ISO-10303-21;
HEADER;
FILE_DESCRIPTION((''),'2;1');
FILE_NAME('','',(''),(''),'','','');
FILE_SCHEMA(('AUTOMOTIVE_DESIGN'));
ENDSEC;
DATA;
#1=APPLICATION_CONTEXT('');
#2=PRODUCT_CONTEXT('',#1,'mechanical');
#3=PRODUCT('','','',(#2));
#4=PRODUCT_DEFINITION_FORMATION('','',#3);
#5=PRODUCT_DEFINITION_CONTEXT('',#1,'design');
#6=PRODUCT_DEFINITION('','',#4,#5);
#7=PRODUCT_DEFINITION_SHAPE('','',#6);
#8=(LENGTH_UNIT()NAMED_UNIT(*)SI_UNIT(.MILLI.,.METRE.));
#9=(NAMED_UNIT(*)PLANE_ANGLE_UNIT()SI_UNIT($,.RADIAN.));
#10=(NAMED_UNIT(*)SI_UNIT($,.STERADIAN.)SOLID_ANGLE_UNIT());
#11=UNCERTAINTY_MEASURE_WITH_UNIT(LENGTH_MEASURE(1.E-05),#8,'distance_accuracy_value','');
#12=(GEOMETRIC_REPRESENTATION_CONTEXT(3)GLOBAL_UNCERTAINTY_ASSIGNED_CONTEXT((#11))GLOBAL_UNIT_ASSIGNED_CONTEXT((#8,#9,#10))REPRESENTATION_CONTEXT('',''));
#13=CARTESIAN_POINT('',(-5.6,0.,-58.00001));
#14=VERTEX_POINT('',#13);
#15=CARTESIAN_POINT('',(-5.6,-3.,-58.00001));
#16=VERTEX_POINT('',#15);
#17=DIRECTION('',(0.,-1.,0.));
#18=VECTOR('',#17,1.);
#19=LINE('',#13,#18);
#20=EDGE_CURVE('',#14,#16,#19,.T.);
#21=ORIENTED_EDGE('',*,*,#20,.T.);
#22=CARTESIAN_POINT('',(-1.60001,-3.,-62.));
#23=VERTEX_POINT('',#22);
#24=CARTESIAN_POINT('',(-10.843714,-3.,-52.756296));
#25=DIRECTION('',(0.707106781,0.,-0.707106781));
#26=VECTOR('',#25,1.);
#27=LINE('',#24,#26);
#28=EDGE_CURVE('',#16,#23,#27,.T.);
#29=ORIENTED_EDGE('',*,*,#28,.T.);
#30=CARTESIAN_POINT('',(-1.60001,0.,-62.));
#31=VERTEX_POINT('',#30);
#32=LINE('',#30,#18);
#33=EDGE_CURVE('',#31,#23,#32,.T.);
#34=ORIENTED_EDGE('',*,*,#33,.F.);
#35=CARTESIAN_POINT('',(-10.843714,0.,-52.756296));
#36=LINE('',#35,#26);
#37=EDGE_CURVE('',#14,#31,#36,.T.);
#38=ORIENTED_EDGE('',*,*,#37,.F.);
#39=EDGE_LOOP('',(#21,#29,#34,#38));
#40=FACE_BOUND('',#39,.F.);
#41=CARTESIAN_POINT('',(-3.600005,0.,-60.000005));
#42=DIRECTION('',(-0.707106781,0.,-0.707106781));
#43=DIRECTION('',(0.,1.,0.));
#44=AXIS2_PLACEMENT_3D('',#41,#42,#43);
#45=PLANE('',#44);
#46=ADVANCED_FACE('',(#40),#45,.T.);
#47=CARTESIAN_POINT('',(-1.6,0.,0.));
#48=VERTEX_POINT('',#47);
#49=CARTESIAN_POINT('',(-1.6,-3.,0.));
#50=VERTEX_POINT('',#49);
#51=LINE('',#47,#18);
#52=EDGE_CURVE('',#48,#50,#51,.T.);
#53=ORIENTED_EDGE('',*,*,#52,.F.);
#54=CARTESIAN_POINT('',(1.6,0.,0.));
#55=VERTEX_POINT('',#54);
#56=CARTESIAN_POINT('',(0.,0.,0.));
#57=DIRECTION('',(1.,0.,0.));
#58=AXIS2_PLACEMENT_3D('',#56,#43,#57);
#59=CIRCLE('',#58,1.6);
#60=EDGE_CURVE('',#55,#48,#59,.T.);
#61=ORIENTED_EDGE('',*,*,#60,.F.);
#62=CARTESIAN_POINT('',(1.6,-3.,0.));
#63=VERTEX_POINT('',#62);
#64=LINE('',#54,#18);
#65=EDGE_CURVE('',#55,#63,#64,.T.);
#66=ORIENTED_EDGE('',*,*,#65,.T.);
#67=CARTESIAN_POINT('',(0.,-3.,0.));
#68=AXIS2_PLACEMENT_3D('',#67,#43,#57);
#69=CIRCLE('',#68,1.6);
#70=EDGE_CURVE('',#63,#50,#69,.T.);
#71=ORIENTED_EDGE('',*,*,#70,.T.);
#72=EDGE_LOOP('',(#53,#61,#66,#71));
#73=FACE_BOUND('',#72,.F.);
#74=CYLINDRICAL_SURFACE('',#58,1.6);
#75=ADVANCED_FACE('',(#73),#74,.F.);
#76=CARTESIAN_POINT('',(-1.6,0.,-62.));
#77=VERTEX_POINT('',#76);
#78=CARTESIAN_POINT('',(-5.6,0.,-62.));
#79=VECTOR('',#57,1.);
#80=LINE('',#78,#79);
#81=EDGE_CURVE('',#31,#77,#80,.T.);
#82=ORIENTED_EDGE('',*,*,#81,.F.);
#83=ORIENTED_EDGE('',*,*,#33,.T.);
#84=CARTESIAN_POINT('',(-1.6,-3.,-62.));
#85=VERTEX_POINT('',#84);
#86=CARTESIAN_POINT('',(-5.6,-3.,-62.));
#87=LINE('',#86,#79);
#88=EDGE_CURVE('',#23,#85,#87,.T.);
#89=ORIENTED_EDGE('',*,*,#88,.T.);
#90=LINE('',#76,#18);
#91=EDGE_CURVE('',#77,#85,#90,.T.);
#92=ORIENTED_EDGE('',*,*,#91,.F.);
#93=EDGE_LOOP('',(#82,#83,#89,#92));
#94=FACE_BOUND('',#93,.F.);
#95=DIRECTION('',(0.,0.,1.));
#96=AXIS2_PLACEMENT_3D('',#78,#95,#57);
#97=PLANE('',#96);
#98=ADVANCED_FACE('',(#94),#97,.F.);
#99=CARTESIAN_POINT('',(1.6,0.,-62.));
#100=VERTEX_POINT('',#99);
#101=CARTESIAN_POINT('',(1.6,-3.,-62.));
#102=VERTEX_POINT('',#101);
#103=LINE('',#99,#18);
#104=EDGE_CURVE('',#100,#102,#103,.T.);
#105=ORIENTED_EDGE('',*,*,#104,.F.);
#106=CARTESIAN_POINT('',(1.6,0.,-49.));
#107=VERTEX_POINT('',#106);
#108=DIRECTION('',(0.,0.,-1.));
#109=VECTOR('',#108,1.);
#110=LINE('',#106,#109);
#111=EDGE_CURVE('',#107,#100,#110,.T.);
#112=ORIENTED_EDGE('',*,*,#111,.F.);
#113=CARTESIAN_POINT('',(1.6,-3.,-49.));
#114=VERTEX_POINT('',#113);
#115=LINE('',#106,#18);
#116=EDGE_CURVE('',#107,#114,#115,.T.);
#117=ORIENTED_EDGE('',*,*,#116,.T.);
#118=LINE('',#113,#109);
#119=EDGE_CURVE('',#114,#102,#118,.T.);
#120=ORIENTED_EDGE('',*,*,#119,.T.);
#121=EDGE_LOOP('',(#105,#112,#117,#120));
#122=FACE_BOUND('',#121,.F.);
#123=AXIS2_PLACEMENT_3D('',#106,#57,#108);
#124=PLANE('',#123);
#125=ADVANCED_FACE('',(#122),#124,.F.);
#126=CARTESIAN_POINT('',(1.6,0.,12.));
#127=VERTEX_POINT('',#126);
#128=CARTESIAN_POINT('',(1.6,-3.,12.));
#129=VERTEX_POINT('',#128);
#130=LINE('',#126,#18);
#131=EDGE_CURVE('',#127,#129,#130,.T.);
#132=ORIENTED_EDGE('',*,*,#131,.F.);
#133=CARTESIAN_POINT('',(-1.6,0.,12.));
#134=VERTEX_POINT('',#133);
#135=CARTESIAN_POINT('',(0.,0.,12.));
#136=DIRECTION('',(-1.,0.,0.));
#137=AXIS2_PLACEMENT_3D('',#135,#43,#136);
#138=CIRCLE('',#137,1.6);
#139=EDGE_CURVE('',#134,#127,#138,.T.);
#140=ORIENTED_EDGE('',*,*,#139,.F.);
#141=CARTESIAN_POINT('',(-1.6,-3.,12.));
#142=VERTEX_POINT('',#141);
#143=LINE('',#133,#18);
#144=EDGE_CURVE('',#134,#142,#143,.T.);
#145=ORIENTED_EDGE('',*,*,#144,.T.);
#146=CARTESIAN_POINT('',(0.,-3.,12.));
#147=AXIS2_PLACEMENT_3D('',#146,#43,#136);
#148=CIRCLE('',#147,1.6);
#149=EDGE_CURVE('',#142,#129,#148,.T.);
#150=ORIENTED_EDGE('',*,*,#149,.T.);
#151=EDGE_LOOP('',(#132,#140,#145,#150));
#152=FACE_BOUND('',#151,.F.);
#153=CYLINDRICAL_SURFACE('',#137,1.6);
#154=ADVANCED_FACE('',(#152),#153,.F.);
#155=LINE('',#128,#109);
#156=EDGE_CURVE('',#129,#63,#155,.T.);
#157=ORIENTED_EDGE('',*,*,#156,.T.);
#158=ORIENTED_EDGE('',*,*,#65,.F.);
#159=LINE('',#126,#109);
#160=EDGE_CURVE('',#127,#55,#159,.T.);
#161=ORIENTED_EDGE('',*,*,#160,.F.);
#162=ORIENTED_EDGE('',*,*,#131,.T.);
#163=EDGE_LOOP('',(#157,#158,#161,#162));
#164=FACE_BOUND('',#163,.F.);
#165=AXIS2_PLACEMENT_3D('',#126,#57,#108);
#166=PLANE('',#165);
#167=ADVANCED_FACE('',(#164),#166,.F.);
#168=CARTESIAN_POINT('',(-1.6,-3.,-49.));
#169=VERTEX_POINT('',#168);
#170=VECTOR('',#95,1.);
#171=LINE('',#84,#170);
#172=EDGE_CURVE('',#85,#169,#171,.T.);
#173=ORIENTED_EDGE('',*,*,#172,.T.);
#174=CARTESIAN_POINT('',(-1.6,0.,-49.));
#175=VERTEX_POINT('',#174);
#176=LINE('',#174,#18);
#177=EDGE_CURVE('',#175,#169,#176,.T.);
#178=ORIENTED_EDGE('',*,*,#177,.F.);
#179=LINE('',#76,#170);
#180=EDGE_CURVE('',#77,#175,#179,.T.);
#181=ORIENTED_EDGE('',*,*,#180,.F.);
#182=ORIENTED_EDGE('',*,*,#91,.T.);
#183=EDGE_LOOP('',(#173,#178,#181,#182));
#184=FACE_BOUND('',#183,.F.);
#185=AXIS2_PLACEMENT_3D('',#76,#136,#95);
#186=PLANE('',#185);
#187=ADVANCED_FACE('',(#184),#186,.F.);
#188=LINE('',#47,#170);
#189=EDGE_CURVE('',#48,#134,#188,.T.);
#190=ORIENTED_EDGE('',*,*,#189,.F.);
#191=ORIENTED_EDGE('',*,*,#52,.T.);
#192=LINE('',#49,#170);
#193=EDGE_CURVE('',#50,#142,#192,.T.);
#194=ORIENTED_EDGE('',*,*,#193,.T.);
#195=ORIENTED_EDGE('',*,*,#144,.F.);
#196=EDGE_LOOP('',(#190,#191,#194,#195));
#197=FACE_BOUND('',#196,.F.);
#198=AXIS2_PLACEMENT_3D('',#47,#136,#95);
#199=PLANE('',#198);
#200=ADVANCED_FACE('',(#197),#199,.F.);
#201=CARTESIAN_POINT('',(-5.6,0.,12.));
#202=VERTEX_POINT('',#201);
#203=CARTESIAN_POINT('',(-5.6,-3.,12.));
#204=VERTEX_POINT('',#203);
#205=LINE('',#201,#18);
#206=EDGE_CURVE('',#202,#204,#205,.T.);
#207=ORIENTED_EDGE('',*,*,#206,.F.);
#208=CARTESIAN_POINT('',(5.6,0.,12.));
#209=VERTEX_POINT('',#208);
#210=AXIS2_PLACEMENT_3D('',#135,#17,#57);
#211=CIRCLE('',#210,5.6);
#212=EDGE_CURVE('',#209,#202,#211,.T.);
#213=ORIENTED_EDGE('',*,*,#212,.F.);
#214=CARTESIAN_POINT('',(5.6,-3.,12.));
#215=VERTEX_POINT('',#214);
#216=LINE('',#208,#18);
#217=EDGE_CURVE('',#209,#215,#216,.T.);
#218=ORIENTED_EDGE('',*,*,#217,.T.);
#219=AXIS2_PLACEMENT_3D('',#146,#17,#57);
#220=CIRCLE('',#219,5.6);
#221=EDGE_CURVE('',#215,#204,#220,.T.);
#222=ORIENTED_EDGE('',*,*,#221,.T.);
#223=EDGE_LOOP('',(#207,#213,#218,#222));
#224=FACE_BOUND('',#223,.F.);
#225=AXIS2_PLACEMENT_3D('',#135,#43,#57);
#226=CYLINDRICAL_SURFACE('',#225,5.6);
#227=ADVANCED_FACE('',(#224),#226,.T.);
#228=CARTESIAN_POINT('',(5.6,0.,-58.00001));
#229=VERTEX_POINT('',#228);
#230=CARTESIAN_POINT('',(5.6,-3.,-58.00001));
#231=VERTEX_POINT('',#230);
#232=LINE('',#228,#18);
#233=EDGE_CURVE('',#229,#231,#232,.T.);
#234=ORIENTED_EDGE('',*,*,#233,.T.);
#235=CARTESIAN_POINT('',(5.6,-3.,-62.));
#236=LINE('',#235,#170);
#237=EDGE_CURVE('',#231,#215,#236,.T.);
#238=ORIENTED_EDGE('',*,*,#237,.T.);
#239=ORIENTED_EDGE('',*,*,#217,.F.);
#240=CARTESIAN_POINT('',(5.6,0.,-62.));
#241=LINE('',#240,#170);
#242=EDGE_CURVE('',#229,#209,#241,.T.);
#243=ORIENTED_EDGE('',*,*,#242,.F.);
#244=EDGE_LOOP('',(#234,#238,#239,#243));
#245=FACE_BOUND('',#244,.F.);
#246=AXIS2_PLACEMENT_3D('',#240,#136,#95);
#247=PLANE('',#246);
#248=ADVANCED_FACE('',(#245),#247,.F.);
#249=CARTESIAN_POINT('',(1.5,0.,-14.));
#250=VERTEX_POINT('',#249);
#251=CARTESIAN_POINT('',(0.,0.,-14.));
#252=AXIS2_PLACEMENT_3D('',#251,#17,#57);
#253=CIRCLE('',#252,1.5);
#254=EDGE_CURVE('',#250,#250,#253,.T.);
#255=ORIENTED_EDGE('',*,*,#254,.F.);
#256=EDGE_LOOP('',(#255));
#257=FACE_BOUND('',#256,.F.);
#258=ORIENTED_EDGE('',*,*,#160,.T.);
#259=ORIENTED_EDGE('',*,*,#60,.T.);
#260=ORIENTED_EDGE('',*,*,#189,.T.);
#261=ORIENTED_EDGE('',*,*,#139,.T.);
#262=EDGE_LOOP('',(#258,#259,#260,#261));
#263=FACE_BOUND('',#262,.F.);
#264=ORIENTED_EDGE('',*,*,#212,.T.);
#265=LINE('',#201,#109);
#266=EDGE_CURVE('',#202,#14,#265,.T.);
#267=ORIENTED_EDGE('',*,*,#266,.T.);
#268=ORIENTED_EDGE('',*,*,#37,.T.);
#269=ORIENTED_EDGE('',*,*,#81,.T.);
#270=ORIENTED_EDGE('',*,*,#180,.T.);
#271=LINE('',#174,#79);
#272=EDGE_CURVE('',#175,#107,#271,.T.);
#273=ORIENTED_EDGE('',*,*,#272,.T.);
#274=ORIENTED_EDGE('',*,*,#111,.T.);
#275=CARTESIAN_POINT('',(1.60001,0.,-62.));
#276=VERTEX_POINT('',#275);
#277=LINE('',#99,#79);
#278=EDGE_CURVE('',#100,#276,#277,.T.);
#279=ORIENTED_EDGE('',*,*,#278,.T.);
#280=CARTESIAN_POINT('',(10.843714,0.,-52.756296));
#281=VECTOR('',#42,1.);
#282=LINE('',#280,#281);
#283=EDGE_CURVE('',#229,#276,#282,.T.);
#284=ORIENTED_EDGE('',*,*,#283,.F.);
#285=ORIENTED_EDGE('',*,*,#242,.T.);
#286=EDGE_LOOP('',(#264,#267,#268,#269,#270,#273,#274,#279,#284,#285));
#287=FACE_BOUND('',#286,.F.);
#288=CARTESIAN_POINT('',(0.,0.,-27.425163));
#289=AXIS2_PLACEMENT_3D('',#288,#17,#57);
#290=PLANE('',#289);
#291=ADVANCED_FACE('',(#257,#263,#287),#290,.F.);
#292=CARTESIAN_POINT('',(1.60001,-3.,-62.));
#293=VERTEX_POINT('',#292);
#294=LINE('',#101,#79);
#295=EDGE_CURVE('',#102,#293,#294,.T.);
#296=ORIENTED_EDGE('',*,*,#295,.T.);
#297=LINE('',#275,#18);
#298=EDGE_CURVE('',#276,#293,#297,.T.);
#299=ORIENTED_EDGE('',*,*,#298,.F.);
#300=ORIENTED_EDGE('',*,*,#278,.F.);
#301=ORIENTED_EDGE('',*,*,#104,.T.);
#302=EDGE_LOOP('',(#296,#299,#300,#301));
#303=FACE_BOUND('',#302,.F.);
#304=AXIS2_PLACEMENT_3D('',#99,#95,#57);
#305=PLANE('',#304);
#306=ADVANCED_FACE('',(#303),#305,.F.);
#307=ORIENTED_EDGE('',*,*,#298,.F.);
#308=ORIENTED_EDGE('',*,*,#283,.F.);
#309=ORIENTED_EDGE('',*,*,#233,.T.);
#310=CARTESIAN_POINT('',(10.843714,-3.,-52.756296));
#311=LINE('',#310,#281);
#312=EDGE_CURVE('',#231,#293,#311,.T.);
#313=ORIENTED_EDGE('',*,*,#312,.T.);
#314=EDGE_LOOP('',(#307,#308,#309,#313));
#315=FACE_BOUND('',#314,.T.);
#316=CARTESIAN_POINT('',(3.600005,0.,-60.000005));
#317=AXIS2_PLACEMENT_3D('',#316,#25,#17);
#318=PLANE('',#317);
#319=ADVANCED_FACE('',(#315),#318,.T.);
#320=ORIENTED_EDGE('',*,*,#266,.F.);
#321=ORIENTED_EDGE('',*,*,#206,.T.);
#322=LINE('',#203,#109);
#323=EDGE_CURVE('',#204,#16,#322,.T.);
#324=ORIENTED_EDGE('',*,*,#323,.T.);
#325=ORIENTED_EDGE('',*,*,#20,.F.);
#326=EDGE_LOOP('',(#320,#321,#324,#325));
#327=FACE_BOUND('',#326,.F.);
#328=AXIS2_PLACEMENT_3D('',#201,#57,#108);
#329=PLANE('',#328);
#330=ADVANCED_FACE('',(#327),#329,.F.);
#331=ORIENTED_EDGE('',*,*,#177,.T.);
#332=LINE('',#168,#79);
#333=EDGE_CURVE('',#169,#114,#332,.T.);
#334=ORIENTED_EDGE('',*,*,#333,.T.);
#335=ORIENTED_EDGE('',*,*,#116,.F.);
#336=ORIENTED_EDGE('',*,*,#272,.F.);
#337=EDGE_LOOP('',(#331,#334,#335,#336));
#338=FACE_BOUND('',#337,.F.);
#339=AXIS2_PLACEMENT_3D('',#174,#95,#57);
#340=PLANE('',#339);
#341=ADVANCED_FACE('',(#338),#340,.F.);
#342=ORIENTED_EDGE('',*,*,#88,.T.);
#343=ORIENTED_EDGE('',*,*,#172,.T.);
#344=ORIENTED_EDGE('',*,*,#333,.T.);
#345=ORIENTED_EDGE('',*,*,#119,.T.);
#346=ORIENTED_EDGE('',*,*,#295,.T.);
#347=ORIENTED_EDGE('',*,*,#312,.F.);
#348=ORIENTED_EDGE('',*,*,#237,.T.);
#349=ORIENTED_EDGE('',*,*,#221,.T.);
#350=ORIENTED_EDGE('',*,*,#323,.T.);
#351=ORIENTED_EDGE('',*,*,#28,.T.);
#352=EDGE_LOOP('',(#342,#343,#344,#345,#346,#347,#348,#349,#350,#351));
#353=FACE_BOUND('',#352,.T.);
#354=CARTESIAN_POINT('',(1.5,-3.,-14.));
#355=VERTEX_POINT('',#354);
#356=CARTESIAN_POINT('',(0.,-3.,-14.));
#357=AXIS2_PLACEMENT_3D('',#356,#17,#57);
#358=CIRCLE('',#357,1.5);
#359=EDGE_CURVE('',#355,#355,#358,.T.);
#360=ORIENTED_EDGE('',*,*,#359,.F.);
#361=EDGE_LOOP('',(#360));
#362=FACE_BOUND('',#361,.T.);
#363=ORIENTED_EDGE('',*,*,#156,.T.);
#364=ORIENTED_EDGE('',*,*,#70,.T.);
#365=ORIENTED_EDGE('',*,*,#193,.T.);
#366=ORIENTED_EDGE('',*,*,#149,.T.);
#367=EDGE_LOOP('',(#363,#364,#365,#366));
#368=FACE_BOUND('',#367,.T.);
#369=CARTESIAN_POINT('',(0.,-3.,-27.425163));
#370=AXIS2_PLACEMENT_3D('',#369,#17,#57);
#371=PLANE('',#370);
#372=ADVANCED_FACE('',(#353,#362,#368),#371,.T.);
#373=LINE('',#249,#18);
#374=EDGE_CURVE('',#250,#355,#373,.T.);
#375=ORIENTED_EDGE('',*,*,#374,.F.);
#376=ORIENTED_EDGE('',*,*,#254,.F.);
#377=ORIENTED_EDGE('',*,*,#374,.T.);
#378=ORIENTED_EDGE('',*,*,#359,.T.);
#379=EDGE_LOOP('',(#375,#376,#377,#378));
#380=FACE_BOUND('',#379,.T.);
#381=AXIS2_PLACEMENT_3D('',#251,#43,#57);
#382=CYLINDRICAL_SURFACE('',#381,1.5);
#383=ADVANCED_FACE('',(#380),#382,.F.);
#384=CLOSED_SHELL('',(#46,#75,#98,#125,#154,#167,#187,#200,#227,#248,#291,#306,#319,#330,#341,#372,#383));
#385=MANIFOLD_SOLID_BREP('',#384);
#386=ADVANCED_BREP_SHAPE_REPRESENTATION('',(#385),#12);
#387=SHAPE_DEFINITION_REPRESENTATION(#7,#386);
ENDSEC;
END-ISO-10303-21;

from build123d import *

# Parameters (mm, degrees)
F0_R     = 1.5
F1_DEPTH = 3
F2_SIZE  = 3.99999


# Not quite as in the source:
# - a fillet or chamfer is up to 0.001 mm smaller than in the source, because OpenCascade refuses the exact size


with BuildPart() as f1:
    # F0 (on Front) → F1 (new body)
    with BuildSketch(Plane.XZ):
        with BuildLine():
            Line((5.6, -62), (5.6, 12))
            ThreePointArc((5.6, 12), (0, 17.6), (-5.6, 12))
            Line((-5.6, 12), (-5.6, -62))
            Line((-5.6, -62), (-1.6, -62))
            Line((-1.6, -62), (-1.6, -49))
            Line((-1.6, -49), (1.6, -49))
            Line((1.6, -49), (1.6, -62))
            Line((1.6, -62), (5.6, -62))
        make_face()
        with Locations((0, -14)):
            Circle(F0_R, mode=Mode.SUBTRACT)
        with BuildLine():
            ThreePointArc((1.6, 0), (0, -1.6), (-1.6, 0))
            Line((-1.6, 0), (-1.6, 12))
            ThreePointArc((-1.6, 12), (0, 13.6), (1.6, 12))
            Line((1.6, 12), (1.6, 0))
        make_face(mode=Mode.SUBTRACT)
    extrude(amount=F1_DEPTH)

    # F2 (size 4 in the source; OpenCascade refuses exactly that, so slightly less here)
    f2_edges = [f1.edges().sort_by_distance(p)[0] for p in [
        (5.6, -1.5, -62),
        (-5.6, -1.5, -62),
    ]]
    chamfer(f2_edges, length=F2_SIZE)


solid = f1.part
